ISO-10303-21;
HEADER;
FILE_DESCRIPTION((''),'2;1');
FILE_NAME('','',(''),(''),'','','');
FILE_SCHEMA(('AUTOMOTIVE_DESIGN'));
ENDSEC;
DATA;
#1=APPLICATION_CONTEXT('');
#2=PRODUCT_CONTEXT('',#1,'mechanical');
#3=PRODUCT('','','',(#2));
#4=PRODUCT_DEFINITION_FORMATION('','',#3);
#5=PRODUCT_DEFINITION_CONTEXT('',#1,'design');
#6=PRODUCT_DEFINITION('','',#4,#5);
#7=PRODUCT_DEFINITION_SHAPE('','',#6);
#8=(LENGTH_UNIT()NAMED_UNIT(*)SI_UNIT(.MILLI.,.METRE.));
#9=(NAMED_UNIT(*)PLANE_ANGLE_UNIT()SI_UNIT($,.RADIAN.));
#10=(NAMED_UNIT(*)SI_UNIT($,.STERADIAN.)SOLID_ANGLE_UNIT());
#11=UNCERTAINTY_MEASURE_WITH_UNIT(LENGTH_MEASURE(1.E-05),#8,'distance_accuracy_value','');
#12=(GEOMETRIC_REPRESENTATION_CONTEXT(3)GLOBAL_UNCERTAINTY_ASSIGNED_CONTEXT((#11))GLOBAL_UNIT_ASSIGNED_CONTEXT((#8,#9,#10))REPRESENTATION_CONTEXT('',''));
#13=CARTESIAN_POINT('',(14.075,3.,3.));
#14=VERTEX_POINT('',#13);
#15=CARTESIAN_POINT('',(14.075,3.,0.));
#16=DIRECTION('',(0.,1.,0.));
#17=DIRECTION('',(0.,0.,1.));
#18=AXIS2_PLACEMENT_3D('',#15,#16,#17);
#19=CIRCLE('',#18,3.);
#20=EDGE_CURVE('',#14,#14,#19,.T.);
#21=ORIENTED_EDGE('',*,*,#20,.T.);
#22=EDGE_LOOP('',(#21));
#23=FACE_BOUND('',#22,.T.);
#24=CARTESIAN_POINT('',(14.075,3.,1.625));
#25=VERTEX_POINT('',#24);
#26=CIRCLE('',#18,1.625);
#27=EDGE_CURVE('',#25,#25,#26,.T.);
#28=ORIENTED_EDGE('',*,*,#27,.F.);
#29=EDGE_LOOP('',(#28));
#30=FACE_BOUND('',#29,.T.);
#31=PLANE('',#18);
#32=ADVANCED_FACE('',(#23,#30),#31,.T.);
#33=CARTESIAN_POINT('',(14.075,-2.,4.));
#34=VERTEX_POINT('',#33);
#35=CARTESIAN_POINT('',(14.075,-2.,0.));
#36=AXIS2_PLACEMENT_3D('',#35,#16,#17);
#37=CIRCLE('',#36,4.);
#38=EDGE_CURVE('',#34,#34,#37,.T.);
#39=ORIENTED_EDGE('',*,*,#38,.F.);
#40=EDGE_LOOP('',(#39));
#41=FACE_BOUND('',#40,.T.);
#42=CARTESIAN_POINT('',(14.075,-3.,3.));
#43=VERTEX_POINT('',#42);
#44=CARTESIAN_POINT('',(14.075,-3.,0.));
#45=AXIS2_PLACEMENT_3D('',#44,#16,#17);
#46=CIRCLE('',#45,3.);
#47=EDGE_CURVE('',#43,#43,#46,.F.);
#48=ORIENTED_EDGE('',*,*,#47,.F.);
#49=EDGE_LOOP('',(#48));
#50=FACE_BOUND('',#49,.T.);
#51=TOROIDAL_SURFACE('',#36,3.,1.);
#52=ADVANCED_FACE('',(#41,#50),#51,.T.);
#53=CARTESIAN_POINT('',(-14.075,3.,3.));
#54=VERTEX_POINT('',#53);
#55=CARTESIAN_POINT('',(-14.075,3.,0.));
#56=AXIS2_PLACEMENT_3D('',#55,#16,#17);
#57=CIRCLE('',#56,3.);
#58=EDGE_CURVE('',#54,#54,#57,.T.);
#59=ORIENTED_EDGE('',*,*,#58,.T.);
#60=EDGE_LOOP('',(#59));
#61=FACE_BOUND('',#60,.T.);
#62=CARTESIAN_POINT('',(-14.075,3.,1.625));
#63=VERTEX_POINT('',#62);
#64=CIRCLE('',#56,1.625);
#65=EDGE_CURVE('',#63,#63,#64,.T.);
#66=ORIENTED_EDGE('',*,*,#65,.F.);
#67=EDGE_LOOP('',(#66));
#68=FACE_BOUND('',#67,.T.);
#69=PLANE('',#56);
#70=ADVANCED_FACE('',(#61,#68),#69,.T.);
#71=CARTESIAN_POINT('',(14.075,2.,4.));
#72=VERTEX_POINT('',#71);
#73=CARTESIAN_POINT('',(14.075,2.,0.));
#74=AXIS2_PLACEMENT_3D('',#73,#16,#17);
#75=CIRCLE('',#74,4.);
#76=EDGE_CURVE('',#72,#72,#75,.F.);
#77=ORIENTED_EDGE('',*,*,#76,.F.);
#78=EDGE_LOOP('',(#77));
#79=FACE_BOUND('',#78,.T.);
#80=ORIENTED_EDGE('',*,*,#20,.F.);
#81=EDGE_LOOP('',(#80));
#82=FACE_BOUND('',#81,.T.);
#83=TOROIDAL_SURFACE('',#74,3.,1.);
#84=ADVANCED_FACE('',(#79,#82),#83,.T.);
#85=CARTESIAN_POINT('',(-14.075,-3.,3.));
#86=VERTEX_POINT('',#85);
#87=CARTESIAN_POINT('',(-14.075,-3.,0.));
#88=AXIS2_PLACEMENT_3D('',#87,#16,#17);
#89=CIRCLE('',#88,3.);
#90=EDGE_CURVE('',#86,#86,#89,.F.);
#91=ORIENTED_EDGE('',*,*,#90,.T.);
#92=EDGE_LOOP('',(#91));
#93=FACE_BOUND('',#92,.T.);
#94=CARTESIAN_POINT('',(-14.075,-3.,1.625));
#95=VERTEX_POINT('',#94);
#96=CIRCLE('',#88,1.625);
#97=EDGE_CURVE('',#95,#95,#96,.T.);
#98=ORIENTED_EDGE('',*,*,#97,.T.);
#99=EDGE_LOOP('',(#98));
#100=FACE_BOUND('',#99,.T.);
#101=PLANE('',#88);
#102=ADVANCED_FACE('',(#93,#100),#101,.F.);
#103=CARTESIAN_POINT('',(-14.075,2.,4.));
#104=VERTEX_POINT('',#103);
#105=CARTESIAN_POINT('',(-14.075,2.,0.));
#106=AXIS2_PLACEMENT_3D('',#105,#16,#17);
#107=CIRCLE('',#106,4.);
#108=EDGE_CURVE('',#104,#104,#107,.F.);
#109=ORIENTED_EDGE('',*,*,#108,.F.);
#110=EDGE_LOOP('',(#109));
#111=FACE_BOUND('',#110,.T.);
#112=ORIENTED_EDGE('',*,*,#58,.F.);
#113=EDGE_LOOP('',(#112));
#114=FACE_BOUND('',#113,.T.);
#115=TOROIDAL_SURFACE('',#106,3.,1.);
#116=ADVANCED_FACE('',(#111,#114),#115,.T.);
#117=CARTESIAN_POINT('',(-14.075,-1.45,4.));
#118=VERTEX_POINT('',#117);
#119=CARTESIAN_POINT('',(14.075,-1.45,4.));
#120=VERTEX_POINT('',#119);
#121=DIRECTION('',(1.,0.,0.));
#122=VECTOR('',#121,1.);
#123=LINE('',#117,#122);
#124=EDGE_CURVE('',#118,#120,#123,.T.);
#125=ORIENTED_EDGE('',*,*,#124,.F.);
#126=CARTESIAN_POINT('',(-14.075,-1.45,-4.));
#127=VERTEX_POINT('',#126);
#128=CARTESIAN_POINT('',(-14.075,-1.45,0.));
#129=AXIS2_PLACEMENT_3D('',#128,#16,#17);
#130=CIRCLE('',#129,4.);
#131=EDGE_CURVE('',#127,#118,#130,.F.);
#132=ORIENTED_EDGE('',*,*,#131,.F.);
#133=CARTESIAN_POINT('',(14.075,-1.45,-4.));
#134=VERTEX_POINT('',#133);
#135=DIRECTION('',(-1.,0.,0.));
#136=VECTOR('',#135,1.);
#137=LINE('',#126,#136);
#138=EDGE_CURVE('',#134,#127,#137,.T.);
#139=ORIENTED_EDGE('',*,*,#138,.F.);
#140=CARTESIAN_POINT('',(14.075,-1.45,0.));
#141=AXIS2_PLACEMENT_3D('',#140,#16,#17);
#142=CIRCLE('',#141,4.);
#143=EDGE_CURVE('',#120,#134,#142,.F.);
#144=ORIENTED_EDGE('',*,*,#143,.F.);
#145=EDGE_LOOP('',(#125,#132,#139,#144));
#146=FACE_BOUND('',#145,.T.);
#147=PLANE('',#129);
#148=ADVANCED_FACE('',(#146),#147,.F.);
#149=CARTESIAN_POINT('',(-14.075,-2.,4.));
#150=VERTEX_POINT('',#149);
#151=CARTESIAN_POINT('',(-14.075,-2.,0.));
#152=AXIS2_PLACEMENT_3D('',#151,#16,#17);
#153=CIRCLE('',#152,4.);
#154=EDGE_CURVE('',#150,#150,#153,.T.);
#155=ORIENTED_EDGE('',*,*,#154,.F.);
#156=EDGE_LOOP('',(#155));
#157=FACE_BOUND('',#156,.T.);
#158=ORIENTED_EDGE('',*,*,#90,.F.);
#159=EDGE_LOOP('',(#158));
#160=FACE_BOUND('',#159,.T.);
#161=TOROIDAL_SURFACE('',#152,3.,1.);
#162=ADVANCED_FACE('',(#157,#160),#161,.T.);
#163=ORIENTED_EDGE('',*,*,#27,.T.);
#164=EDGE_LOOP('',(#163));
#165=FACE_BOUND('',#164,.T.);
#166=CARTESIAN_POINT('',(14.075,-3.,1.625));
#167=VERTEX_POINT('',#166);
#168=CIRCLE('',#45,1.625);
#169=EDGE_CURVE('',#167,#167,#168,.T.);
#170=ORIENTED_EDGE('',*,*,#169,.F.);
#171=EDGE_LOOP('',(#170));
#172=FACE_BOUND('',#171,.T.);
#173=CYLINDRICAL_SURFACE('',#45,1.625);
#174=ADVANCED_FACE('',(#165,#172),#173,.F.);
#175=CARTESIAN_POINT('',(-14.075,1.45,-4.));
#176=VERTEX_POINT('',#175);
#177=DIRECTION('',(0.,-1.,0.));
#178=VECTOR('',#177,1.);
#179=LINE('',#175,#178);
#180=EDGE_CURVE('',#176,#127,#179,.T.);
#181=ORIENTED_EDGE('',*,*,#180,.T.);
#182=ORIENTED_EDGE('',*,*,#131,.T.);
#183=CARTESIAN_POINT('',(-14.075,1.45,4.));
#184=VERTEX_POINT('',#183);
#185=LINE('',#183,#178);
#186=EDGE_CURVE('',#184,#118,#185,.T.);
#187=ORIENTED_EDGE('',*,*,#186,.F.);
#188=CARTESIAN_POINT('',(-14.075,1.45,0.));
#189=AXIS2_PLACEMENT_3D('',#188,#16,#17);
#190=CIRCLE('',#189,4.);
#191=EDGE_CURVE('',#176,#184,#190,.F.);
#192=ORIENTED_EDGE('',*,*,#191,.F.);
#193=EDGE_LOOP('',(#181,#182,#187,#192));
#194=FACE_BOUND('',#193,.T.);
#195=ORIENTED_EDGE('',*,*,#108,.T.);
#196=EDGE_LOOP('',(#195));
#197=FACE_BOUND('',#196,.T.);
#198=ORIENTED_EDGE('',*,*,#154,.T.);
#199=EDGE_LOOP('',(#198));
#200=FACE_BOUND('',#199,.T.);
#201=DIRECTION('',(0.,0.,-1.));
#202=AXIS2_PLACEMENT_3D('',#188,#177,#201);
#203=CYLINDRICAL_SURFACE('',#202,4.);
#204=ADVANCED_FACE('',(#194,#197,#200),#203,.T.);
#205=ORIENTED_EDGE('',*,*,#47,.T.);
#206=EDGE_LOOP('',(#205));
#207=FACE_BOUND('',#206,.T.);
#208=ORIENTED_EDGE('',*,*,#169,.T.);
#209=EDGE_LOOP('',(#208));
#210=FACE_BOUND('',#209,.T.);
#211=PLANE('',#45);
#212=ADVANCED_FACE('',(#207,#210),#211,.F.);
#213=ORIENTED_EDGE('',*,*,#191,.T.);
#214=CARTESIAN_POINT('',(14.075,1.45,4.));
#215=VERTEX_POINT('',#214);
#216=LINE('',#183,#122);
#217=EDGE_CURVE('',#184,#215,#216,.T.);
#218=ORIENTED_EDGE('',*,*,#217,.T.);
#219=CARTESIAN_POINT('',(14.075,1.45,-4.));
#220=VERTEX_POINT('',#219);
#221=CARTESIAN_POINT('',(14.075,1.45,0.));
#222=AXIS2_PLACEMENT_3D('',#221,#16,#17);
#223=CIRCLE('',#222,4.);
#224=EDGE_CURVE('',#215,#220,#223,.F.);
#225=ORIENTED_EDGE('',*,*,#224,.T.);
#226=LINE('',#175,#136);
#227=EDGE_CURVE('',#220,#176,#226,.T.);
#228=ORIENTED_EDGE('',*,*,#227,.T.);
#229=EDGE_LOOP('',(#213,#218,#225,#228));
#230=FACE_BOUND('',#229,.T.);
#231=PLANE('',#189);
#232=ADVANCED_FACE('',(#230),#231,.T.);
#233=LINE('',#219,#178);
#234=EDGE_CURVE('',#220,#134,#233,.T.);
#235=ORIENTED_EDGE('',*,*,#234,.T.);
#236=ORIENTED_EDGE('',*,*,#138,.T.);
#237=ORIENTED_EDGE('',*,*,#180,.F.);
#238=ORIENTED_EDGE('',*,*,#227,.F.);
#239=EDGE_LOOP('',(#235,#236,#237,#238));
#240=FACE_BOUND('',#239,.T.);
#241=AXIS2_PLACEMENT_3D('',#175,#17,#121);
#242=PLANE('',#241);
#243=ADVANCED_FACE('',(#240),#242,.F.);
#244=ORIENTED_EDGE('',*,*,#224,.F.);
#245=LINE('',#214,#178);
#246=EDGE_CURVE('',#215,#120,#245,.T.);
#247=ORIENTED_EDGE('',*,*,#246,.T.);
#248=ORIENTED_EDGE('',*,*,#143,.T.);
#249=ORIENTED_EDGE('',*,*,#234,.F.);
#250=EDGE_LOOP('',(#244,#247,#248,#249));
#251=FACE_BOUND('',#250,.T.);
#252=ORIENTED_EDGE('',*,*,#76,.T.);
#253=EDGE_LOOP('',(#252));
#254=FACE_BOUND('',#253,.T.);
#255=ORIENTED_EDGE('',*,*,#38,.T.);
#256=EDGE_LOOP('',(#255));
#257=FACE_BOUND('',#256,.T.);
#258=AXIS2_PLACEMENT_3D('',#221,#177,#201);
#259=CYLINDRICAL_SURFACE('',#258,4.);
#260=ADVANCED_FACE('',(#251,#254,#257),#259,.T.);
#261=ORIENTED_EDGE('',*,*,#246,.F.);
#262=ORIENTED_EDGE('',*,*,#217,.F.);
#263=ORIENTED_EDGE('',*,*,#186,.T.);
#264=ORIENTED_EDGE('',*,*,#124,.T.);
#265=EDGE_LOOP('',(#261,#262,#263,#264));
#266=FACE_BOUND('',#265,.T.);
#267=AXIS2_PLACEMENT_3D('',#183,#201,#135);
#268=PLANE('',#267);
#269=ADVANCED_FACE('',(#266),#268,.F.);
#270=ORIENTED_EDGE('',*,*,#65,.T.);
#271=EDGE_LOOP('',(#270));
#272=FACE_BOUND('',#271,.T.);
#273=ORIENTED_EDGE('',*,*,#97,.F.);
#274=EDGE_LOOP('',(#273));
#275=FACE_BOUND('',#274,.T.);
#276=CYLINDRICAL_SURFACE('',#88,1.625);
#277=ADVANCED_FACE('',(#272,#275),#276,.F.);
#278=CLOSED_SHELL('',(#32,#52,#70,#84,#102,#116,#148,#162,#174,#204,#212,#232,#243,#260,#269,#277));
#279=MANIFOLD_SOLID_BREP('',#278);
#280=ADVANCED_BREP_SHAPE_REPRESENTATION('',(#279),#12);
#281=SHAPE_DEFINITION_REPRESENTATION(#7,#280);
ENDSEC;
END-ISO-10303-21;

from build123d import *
from build123d.topology import SkipClean

# Parameters (mm, degrees)
BOSS_EXTRUDE1_DEPTH = 1.45
SKETCH2_R           = 4
BOSS_EXTRUDE2_DEPTH = 3
FILLET1_R           = 1
SKETCH3_R           = 1.625
CUT_EXTRUDE1_DEPTH  = 20.460360465


with BuildPart() as part:
    # Sketch1 → Boss-Extrude1 (new, symmetric)
    with BuildSketch(Plane(origin=(0, 0, 0), x_dir=(1, 0, 0), z_dir=(0, 1, 0))):
        with BuildLine():
            Line((-14.075, 4), (14.075, 4))
            ThreePointArc((14.075, 4), (18.075, 0), (14.075, -4))
            Line((14.075, -4), (-14.075, -4))
            ThreePointArc((-14.075, -4), (-18.075, 0), (-14.075, 4))
        make_face()
    extrude(amount=BOSS_EXTRUDE1_DEPTH, both=True)

    # Sketch2 → Boss-Extrude2 (add, symmetric)
    with SkipClean():  # the faces are left unmerged after this step: merging them gives an invalid solid
        with BuildSketch(Plane(origin=(0, 0, 0), x_dir=(1, 0, 0), z_dir=(0, 1, 0))):
            with Locations((-14.075, 0)):
                Circle(SKETCH2_R)
            with Locations((14.075, 0)):
                Circle(SKETCH2_R)
        extrude(amount=BOSS_EXTRUDE2_DEPTH, both=True)
    add(part.part.scale(1), mode=Mode.REPLACE)  # the faces are merged on a copy

    # Fillet1
    fillet1_edges = [part.edges().sort_by_distance(p)[0] for p in [
        (10.075, 3, 0),
        (10.075, -3, 0),
        (-18.075, -3, 0),
        (-18.075, 3, 0),
    ]]
    fillet(fillet1_edges, radius=FILLET1_R)

    # Sketch3 → Cut-Extrude1 (cut, through all)
    with BuildSketch(Plane(origin=(0, 3, 0), x_dir=(1, 0, 0), z_dir=(0, 1, 0))):
        with Locations((-14.075, 0)):
            Circle(SKETCH3_R)
        with Locations((14.075, 0)):
            Circle(SKETCH3_R)
    extrude(amount=-CUT_EXTRUDE1_DEPTH, mode=Mode.SUBTRACT)


solid = part.part
